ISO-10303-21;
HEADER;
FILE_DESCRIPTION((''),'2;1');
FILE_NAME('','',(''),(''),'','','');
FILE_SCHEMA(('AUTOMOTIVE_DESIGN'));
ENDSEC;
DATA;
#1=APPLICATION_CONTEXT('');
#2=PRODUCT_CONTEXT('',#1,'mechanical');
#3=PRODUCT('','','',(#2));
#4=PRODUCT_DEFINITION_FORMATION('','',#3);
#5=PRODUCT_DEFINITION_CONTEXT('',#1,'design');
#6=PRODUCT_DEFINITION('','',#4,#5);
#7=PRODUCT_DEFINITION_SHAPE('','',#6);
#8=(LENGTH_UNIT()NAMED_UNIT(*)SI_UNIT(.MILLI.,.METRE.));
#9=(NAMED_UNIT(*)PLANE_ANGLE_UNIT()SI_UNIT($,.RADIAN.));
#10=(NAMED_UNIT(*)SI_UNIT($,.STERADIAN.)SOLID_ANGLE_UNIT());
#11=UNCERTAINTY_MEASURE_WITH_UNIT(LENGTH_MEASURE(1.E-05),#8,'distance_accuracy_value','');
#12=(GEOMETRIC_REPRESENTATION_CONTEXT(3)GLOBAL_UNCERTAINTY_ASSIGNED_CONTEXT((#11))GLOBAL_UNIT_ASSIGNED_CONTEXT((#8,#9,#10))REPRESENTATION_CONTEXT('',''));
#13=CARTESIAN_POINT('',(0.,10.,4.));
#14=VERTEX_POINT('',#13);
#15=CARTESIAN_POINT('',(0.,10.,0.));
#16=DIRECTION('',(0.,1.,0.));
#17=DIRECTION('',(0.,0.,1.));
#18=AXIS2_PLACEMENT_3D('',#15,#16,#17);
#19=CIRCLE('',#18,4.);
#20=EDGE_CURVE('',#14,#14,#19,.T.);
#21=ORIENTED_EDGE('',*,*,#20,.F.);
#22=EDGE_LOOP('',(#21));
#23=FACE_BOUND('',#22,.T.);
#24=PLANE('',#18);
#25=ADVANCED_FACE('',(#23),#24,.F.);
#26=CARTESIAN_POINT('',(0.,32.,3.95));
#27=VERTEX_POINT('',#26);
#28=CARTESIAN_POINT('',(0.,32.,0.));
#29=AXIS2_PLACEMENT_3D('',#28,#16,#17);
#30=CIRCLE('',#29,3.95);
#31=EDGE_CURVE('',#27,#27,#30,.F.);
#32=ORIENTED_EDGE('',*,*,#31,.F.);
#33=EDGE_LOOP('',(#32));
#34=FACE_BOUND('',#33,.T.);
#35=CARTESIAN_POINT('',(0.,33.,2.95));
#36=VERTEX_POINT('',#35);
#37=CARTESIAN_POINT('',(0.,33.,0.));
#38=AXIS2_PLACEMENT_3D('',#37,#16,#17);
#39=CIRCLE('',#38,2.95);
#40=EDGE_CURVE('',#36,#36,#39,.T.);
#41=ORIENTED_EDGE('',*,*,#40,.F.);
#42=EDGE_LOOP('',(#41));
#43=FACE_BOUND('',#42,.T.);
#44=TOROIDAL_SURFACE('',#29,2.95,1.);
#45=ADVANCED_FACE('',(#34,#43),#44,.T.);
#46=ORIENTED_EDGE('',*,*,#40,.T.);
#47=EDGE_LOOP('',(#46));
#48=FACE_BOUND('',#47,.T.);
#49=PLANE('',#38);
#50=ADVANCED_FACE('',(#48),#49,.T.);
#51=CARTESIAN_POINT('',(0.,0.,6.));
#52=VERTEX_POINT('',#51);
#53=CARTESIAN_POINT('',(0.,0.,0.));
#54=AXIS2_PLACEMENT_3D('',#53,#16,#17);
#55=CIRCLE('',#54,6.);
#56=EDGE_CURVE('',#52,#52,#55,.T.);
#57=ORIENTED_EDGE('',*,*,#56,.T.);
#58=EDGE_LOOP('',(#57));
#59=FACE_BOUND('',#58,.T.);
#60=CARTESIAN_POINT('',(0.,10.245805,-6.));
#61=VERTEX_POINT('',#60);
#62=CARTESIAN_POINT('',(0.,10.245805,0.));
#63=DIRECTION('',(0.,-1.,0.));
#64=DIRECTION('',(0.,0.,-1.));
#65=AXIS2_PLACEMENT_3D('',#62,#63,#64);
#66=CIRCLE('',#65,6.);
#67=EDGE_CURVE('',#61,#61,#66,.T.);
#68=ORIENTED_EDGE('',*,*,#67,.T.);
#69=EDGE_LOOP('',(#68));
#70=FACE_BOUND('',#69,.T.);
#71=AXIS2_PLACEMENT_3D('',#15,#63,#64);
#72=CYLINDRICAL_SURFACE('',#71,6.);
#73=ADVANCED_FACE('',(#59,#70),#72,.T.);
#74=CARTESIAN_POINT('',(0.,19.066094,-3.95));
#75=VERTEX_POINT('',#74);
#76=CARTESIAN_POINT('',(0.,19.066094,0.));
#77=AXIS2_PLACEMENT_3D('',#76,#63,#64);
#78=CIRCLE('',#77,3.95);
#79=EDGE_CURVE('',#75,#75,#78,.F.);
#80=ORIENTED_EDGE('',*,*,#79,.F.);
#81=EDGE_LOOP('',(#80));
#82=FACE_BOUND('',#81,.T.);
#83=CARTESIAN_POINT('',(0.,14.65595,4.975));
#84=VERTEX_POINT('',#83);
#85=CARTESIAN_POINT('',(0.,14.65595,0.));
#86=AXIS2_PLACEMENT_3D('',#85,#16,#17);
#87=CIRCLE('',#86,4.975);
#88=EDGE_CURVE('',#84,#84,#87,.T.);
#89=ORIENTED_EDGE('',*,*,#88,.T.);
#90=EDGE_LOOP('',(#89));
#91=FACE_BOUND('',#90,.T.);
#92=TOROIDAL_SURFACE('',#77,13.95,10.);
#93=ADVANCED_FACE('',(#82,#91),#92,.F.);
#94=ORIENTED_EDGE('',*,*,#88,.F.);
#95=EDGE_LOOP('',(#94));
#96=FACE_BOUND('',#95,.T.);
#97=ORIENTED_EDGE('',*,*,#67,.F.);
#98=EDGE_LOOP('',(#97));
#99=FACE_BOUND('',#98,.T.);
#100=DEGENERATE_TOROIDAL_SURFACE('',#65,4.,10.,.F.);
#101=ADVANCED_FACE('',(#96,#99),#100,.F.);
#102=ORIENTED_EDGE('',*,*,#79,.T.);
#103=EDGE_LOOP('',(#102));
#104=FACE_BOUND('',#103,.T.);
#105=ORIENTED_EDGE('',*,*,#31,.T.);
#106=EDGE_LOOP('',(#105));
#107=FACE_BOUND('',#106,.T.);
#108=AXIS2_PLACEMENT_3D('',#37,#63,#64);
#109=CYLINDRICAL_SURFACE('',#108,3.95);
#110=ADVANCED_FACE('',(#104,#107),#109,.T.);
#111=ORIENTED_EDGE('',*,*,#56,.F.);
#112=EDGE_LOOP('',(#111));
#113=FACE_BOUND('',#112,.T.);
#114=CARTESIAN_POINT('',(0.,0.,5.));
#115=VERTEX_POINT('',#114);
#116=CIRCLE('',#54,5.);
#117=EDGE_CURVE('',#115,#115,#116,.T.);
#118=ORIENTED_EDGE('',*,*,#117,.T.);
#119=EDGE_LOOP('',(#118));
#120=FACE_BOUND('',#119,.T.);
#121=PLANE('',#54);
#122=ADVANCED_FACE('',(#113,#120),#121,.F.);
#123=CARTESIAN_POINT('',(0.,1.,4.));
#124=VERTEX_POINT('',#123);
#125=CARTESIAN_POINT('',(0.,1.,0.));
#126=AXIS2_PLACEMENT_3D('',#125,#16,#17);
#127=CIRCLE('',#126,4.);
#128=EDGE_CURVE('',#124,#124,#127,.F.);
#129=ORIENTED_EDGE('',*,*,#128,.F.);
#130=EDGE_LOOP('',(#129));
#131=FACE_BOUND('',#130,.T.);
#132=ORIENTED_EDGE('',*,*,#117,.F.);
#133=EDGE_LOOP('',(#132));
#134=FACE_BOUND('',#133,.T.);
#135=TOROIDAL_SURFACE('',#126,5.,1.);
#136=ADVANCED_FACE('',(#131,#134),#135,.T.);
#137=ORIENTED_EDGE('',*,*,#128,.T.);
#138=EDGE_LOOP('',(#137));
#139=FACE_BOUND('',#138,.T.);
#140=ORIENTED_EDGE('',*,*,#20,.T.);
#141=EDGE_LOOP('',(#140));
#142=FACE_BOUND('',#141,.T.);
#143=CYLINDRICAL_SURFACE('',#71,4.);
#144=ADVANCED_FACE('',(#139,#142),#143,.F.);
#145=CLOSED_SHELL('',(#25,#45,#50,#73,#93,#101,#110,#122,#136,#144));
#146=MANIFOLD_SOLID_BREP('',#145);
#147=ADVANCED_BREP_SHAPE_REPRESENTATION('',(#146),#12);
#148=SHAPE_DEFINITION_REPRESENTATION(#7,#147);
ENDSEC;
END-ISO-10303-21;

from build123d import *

# Parameters (mm, degrees)
SKETCH1_R           = 6
SKETCH1_R_2         = 4
BOSS_EXTRUDE1_DEPTH = 10
SKETCH2_R           = 6
BOSS_EXTRUDE2_DEPTH = 3
SKETCH3_R           = 3.95
BOSS_EXTRUDE3_DEPTH = 20
FILLET1_R           = 1
FILLET2_R           = 10
FILLET3_R           = 1
FILLET4_R           = 10


with BuildPart() as part:
    # Sketch1 → Boss-Extrude1 (new body)
    with BuildSketch(Plane(origin=(0, 0, 0), x_dir=(1, 0, 0), z_dir=(0, 1, 0))):
        with Locations(Location((0, 0, 0), (0, 0, 270))):
            Circle(SKETCH1_R)
        with Locations(Location((0, 0, 0), (0, 0, 270))):
            Circle(SKETCH1_R_2, mode=Mode.SUBTRACT)
    extrude(amount=BOSS_EXTRUDE1_DEPTH)

    # Sketch2 → Boss-Extrude2 (add)
    with BuildSketch(Plane(origin=(0, 10, 0), x_dir=(1, 0, 0), z_dir=(0, 1, 0))):
        with Locations(Location((0, 0, 0), (0, 0, 270))):
            Circle(SKETCH2_R)
    extrude(amount=BOSS_EXTRUDE2_DEPTH)

    # Sketch3 → Boss-Extrude3 (add)
    with BuildSketch(Plane(origin=(0, 13, 0), x_dir=(1, 0, 0), z_dir=(0, 1, 0))):
        with Locations(Location((0, 0, 0), (0, 0, 270))):
            Circle(SKETCH3_R)
    extrude(amount=BOSS_EXTRUDE3_DEPTH)

    # Fillet1
    fillet1_edges = [part.edges().sort_by_distance(p)[0] for p in [
        (0, 33, -3.95),
    ]]
    fillet(fillet1_edges, radius=FILLET1_R)

    # Fillet2
    # the kernel refuses this fillet: 10 mm, written as the material it adds along each edge
    with BuildSketch(Plane(origin=(0, 13, 0), x_dir=(0, 0, 1), z_dir=(-1, 0, 0))) as fillet2_piece_1:
        with BuildLine():
            CenterArc((13.95, 6.066094295), FILLET2_R, 180, 37.344744354)
            Line((6, 0), (5.841, -0.121321886))
            ThreePointArc((5.841, -0.121321886), (4.975, -0.2), (3.95, -0.2))
            Line((3.95, -0.2), (3.75, 0))
            Line((3.75, 0), (3.75, 6.066094295))
            Line((3.75, 6.066094295), (3.95, 6.066094295))
        make_face()
    revolve(axis=Axis((0, 13, 0), (0, 1, 0)))

    # Fillet3
    fillet3_edges = [part.edges().sort_by_distance(p)[0] for p in [
        (0, 0, -4),
    ]]
    fillet(fillet3_edges, radius=FILLET3_R)

    # Fillet4
    fillet4_edges = [part.edges().sort_by_distance(p)[0] for p in [
        (0, 13, -6),
    ]]
    fillet(fillet4_edges, radius=FILLET4_R)


solid = part.part
